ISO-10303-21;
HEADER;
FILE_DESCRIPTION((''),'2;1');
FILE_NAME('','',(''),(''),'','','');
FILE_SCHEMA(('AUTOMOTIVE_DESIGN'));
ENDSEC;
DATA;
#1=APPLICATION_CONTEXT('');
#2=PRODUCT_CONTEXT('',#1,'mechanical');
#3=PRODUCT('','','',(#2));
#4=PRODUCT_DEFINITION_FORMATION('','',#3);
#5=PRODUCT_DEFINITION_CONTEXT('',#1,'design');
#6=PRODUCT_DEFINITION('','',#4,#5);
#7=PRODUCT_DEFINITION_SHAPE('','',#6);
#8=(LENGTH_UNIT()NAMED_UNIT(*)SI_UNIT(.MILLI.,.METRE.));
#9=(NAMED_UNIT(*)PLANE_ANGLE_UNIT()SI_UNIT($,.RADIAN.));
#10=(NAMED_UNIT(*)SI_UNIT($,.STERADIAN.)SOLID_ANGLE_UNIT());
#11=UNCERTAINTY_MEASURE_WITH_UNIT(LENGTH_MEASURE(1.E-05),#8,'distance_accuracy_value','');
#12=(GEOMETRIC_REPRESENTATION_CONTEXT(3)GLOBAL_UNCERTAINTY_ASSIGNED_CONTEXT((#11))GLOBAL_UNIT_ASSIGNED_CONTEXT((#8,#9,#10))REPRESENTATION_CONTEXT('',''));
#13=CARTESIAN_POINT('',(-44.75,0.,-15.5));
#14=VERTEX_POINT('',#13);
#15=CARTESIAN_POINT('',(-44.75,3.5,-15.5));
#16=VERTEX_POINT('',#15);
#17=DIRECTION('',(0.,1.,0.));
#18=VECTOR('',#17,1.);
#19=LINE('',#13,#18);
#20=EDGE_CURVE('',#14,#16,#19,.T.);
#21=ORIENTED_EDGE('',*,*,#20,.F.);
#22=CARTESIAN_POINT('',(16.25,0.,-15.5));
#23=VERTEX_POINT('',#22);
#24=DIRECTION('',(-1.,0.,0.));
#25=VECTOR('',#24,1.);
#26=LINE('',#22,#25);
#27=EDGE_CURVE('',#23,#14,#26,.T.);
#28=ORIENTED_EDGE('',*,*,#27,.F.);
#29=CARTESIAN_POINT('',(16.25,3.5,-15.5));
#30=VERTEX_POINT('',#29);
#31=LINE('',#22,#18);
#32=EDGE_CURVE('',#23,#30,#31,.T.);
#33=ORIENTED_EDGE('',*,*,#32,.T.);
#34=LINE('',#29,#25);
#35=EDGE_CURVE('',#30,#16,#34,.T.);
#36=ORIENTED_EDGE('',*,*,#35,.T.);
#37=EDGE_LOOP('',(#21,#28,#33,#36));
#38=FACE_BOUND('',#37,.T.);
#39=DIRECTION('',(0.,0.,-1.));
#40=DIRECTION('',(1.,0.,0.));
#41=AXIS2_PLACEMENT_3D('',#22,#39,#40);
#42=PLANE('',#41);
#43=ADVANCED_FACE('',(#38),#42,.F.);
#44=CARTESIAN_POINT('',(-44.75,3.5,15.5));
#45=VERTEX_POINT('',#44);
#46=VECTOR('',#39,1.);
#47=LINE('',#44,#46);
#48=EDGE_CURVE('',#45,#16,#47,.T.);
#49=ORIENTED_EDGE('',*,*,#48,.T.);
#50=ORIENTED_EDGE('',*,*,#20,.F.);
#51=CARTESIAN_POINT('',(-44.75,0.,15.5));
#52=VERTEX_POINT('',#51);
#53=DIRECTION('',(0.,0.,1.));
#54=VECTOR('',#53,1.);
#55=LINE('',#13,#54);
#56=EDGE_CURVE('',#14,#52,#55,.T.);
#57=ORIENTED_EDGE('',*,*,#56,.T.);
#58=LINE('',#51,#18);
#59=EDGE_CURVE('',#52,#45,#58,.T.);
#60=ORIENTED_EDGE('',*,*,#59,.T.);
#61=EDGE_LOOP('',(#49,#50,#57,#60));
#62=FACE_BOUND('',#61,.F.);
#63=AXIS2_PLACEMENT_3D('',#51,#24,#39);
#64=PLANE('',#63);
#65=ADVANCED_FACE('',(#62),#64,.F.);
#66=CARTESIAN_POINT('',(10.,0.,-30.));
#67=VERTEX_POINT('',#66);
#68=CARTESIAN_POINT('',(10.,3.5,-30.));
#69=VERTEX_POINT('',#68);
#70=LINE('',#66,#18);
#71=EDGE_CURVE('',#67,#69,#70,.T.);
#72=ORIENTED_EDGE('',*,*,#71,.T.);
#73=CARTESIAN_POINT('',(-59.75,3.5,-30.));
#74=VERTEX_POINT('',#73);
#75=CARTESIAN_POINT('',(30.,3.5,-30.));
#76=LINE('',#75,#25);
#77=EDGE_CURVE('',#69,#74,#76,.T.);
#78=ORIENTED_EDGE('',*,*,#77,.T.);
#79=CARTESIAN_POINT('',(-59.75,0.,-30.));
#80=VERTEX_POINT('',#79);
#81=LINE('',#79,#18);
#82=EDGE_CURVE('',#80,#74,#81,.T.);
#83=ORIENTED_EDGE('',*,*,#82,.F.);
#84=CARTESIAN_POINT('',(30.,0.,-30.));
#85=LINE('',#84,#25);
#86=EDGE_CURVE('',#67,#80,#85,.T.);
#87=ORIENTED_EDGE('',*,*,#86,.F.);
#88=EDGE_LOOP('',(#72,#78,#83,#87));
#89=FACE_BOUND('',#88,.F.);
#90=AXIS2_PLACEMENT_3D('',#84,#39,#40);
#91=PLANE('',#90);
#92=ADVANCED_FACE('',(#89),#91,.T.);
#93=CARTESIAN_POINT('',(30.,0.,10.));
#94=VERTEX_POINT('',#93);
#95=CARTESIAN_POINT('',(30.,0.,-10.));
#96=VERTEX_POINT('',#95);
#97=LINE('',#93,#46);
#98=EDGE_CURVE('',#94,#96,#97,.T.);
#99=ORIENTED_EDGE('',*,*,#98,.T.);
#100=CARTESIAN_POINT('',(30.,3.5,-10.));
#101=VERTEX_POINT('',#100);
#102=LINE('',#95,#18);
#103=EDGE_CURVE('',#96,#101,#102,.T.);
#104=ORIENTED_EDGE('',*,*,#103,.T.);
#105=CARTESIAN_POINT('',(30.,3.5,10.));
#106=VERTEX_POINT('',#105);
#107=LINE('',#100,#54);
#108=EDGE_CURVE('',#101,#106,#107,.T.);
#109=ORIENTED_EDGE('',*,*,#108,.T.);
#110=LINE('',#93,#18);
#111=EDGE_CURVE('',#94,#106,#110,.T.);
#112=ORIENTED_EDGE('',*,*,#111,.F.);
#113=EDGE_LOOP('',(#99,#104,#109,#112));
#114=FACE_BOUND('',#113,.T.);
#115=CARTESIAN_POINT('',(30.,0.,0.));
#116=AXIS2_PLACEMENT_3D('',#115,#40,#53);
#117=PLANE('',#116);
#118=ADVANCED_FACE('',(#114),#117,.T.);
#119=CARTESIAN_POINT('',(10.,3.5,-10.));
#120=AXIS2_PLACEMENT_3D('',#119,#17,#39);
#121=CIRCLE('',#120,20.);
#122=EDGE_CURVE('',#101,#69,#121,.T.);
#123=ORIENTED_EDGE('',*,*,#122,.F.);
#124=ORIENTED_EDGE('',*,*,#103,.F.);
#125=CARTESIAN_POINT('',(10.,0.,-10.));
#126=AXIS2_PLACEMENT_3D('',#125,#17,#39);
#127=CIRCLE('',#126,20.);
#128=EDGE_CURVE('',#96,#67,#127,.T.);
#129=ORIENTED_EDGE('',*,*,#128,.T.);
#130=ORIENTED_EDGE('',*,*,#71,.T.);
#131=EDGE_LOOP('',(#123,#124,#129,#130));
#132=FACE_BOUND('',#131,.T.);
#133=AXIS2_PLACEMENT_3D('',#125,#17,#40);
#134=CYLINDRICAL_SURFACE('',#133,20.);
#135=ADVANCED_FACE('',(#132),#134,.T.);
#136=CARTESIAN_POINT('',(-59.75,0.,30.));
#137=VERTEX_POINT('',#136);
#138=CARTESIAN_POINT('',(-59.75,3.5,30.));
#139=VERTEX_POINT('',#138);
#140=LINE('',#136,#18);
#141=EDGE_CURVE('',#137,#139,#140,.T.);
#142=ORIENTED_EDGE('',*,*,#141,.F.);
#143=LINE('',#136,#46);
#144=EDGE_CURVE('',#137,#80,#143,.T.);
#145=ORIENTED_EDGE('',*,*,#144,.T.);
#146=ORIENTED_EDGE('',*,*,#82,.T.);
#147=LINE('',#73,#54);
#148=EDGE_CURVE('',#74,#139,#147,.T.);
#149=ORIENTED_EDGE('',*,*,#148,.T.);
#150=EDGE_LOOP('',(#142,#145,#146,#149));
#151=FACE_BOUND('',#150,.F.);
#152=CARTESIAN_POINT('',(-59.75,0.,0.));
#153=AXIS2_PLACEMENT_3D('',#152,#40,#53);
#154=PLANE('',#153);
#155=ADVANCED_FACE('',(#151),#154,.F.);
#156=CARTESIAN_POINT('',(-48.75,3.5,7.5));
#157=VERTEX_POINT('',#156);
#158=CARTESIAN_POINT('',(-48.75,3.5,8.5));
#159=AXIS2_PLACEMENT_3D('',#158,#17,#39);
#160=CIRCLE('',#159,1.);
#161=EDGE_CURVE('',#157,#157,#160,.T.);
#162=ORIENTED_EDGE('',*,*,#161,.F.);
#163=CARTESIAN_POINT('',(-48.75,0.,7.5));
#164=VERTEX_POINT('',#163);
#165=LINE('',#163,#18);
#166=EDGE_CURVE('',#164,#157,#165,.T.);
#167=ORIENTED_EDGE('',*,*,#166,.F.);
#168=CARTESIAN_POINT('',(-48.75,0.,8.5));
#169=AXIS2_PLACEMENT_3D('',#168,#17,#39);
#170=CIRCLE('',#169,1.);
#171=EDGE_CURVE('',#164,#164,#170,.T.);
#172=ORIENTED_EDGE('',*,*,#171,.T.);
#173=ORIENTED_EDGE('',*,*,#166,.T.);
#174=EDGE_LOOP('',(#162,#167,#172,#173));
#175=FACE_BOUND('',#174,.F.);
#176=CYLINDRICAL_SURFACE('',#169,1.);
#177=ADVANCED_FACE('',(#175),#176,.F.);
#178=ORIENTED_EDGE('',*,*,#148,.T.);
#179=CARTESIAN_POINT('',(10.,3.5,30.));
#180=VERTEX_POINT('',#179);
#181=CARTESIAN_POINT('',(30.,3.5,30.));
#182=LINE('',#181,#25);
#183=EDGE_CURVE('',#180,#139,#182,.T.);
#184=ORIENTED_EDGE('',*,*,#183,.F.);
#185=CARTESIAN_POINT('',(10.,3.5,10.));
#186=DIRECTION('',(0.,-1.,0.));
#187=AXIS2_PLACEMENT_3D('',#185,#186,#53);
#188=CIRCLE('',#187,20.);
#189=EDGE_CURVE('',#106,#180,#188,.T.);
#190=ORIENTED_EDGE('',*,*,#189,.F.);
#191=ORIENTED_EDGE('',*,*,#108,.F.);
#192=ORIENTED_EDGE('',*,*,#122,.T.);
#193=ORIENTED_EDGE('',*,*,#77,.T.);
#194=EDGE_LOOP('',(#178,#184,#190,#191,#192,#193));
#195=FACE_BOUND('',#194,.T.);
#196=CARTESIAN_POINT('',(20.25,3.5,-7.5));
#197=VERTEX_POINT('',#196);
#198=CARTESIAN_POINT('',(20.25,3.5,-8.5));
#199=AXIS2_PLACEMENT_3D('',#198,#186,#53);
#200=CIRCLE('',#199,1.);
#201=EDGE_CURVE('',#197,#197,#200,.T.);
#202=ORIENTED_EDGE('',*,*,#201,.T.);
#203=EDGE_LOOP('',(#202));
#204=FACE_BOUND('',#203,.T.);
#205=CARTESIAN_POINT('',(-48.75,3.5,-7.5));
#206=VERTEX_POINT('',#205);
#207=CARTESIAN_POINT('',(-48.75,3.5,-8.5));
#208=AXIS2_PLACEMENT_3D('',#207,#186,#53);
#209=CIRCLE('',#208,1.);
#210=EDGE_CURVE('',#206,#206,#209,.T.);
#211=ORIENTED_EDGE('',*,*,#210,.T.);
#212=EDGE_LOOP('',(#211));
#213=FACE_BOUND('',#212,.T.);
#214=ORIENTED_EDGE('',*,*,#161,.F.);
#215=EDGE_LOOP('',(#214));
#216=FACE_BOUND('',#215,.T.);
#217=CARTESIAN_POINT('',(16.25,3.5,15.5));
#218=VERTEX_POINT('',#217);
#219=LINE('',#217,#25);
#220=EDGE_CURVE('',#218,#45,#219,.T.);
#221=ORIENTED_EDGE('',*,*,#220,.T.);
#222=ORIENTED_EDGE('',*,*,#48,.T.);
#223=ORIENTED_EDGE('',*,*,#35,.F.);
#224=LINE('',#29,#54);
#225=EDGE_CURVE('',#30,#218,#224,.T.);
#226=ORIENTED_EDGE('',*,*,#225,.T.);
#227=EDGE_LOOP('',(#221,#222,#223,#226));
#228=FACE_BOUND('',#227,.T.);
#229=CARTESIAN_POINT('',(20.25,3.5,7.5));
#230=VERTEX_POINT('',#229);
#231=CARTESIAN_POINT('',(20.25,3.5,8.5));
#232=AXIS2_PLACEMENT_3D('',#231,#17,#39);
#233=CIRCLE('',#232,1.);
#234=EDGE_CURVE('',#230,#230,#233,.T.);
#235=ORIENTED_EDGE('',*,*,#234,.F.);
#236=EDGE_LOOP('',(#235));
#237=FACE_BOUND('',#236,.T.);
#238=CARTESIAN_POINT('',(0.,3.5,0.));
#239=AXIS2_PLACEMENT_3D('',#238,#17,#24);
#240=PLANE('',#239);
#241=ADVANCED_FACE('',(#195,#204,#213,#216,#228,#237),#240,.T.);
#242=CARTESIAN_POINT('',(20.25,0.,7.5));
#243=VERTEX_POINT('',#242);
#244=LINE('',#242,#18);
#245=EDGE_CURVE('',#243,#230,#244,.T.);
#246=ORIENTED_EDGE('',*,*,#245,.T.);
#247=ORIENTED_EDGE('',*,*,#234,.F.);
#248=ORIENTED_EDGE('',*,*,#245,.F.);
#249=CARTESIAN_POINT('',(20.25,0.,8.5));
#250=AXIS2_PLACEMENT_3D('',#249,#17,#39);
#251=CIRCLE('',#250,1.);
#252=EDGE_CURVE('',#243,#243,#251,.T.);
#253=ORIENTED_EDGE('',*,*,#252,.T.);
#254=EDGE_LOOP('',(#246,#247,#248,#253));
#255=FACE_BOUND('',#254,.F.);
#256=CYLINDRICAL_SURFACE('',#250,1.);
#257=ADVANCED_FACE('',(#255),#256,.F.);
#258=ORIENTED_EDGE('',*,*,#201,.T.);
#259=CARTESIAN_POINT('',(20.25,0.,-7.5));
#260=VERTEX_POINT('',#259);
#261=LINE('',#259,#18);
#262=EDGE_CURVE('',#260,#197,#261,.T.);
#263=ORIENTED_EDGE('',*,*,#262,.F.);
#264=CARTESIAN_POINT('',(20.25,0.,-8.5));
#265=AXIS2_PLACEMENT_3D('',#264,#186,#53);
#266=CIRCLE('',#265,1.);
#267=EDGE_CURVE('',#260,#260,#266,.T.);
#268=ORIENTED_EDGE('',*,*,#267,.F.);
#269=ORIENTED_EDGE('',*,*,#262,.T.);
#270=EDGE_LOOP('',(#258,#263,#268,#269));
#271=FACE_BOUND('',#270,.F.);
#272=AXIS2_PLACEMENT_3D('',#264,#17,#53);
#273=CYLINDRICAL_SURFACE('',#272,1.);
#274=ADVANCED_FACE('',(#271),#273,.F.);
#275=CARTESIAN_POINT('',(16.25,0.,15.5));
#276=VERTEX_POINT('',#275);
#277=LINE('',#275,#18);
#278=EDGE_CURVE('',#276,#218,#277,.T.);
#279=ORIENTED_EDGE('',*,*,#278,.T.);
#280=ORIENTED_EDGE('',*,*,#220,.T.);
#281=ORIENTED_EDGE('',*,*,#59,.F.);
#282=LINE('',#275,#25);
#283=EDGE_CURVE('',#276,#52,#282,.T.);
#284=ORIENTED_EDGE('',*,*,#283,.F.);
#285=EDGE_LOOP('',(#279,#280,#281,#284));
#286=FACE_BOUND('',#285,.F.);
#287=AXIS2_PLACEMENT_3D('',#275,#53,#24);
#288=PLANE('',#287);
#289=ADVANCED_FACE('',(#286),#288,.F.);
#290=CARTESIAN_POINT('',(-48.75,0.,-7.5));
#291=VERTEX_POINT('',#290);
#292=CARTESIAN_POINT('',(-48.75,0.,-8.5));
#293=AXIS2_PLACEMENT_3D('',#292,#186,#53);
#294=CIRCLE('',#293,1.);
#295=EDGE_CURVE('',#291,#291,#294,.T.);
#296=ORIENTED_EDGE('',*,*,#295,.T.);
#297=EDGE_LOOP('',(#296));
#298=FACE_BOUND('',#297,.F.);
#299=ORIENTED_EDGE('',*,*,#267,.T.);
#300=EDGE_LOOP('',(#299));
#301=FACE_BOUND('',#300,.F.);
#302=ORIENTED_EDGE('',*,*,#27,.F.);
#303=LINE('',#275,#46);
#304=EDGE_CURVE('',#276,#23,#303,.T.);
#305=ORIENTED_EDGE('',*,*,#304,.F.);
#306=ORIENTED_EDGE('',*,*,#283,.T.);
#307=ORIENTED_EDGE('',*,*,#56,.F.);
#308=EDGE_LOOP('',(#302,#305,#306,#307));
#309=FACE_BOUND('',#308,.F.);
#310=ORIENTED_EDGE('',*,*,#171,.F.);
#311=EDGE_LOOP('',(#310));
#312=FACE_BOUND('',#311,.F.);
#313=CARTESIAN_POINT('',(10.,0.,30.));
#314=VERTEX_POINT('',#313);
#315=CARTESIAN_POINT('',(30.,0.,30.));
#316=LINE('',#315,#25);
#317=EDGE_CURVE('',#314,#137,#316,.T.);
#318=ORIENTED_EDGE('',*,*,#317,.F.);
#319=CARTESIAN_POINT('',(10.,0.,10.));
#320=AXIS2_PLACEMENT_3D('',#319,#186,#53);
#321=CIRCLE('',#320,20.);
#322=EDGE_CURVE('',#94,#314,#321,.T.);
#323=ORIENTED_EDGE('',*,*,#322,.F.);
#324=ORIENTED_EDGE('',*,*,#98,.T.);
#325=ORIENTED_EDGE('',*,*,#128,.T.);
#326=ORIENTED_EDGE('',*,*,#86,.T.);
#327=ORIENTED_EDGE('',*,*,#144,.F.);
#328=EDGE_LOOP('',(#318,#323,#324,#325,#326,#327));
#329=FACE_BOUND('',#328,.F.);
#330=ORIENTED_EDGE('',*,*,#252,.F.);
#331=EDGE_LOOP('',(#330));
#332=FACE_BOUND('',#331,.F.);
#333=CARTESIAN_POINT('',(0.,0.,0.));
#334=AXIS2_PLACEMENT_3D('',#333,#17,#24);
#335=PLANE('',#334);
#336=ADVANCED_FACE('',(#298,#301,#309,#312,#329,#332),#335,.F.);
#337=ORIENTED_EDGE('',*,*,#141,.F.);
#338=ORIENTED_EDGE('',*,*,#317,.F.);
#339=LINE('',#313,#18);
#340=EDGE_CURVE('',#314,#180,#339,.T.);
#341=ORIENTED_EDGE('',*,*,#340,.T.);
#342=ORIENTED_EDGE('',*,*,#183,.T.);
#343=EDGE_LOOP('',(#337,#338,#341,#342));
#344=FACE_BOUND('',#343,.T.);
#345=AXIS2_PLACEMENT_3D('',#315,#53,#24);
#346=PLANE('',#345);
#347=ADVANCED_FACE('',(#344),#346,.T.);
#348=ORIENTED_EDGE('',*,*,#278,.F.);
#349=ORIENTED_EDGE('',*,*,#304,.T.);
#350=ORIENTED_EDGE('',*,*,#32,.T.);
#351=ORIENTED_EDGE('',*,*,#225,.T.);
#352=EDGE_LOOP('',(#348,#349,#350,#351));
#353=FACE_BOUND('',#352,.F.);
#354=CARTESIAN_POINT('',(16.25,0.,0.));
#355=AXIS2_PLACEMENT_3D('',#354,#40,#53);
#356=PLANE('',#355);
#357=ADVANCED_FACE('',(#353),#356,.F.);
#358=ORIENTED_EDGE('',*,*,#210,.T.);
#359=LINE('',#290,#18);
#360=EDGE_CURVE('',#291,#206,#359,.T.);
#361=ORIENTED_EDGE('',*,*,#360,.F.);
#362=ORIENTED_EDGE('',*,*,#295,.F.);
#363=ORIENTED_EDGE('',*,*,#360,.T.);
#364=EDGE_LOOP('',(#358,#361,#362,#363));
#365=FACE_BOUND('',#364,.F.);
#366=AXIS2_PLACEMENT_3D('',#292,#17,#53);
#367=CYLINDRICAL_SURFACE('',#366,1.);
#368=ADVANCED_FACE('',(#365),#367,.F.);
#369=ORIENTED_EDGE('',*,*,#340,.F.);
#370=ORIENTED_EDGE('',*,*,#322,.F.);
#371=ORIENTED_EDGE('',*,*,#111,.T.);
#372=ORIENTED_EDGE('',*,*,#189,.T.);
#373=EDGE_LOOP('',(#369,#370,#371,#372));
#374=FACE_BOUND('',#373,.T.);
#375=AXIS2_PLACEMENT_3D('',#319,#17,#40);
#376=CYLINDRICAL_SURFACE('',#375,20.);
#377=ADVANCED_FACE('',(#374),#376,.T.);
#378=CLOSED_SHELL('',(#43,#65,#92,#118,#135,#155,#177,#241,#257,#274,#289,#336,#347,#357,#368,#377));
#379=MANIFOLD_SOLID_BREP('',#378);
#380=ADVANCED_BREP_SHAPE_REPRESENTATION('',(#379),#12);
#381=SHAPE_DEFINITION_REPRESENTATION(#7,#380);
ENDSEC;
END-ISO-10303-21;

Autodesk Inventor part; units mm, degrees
ref_plane "YZ Plane" through (0, 0, 0) normal (1, 0, 0) x (0, 1, 0)
ref_plane "XZ Plane" through (0, 0, 0) normal (0, 1, 0) x (-1, 0, 0)
ref_plane "XY Plane" through (0, 0, 0) normal (0, 0, 1) x (1, 0, 0)
sketch "Sketch1" plane through (0, 0, 0) normal (0, 1, 0) x (-1, 0, 0)
  line L0 (0, 0) -> (-16.25, 0)
  line L1 (0, 0) -> (44.75, 0)
  line L2 (300, 0) -> (330, 0) construction
  line L3 (330, 30) -> (-30, 30) construction
  line L4 (-16.25, 15.5) -> (44.75, 15.5)
  line L5 (44.75, 15.5) -> (44.75, 0)
  line L6 (44.75, -15.5) -> (-16.25, -15.5)
  line L7 (-16.25, -15.5) -> (-16.25, 0)
  line L8 (-16.25, 15.5) -> (44.75, -15.5) construction
  line L9 (44.75, 15.5) -> (-16.25, -15.5) construction
  line L10 (-20.25, 8.5) -> (48.75, 8.5) construction
  line L11 (48.75, 8.5) -> (48.75, -8.5) construction
  line L12 (48.75, -8.5) -> (-20.25, -8.5) construction
  line L13 (-20.25, -8.5) -> (-20.25, 8.5) construction
  line L14 (-20.25, 8.5) -> (48.75, -8.5) construction
  line L15 (48.75, 8.5) -> (-20.25, -8.5) construction
  line L16 (-30, 0) -> (-30, 30)
  line L17 (330, 0) -> (330, 30) construction
  line L18 (44.75, 0) -> (300, 0) construction
  line L19 (44.75, 0) -> (44.75, -15.5)
  line L20 (-16.25, 0) -> (-30, 0)
  line L21 (-16.25, 0) -> (-16.25, 15.5)
  line L22 (300, 0) -> (300, 18.5) construction
  line L23 (0, 0) -> (-30, 0) construction
  line L24 (44.75, 0) -> (59.75, 0)
  line L25 (59.75, 0) -> (59.75, 30)
  line L26 (-30, 30) -> (59.75, 30)
  point P0 (14.25, 0)
  point P1 (14.25, 0)
  point P2 (285, 0)
  dimension "d0" = 300
  dimension "d5" = 61
  dimension "d6" = 31
  dimension "d7" = 69
  dimension "d8" = 17
  dimension "d9" = 16.25
  dimension "d10" = 30
  dimension "d11" = 30
  dimension "d20" = 18.5
  dimension "d21" = 15
  dimension "d29" = 15
extrude "Extrusion1" add sketch "Sketch1" along normal blind 3.5 contours L20 L16 L26 L25 L24 L5 L4 L21
hole "Hole1" at (20.25, 0, 8.5) at (-48.75, 0, 8.5) direction (0, 1, 0) diameter 2 end through all
fillet "Fillet1" radius 20 1 edges at (30, 1.75, 30)
mirror "Mirror1" about plane through (30, 0, 0) normal (0, 0, -1)
properties part number "segment1c" material "Plywood, Finish"
